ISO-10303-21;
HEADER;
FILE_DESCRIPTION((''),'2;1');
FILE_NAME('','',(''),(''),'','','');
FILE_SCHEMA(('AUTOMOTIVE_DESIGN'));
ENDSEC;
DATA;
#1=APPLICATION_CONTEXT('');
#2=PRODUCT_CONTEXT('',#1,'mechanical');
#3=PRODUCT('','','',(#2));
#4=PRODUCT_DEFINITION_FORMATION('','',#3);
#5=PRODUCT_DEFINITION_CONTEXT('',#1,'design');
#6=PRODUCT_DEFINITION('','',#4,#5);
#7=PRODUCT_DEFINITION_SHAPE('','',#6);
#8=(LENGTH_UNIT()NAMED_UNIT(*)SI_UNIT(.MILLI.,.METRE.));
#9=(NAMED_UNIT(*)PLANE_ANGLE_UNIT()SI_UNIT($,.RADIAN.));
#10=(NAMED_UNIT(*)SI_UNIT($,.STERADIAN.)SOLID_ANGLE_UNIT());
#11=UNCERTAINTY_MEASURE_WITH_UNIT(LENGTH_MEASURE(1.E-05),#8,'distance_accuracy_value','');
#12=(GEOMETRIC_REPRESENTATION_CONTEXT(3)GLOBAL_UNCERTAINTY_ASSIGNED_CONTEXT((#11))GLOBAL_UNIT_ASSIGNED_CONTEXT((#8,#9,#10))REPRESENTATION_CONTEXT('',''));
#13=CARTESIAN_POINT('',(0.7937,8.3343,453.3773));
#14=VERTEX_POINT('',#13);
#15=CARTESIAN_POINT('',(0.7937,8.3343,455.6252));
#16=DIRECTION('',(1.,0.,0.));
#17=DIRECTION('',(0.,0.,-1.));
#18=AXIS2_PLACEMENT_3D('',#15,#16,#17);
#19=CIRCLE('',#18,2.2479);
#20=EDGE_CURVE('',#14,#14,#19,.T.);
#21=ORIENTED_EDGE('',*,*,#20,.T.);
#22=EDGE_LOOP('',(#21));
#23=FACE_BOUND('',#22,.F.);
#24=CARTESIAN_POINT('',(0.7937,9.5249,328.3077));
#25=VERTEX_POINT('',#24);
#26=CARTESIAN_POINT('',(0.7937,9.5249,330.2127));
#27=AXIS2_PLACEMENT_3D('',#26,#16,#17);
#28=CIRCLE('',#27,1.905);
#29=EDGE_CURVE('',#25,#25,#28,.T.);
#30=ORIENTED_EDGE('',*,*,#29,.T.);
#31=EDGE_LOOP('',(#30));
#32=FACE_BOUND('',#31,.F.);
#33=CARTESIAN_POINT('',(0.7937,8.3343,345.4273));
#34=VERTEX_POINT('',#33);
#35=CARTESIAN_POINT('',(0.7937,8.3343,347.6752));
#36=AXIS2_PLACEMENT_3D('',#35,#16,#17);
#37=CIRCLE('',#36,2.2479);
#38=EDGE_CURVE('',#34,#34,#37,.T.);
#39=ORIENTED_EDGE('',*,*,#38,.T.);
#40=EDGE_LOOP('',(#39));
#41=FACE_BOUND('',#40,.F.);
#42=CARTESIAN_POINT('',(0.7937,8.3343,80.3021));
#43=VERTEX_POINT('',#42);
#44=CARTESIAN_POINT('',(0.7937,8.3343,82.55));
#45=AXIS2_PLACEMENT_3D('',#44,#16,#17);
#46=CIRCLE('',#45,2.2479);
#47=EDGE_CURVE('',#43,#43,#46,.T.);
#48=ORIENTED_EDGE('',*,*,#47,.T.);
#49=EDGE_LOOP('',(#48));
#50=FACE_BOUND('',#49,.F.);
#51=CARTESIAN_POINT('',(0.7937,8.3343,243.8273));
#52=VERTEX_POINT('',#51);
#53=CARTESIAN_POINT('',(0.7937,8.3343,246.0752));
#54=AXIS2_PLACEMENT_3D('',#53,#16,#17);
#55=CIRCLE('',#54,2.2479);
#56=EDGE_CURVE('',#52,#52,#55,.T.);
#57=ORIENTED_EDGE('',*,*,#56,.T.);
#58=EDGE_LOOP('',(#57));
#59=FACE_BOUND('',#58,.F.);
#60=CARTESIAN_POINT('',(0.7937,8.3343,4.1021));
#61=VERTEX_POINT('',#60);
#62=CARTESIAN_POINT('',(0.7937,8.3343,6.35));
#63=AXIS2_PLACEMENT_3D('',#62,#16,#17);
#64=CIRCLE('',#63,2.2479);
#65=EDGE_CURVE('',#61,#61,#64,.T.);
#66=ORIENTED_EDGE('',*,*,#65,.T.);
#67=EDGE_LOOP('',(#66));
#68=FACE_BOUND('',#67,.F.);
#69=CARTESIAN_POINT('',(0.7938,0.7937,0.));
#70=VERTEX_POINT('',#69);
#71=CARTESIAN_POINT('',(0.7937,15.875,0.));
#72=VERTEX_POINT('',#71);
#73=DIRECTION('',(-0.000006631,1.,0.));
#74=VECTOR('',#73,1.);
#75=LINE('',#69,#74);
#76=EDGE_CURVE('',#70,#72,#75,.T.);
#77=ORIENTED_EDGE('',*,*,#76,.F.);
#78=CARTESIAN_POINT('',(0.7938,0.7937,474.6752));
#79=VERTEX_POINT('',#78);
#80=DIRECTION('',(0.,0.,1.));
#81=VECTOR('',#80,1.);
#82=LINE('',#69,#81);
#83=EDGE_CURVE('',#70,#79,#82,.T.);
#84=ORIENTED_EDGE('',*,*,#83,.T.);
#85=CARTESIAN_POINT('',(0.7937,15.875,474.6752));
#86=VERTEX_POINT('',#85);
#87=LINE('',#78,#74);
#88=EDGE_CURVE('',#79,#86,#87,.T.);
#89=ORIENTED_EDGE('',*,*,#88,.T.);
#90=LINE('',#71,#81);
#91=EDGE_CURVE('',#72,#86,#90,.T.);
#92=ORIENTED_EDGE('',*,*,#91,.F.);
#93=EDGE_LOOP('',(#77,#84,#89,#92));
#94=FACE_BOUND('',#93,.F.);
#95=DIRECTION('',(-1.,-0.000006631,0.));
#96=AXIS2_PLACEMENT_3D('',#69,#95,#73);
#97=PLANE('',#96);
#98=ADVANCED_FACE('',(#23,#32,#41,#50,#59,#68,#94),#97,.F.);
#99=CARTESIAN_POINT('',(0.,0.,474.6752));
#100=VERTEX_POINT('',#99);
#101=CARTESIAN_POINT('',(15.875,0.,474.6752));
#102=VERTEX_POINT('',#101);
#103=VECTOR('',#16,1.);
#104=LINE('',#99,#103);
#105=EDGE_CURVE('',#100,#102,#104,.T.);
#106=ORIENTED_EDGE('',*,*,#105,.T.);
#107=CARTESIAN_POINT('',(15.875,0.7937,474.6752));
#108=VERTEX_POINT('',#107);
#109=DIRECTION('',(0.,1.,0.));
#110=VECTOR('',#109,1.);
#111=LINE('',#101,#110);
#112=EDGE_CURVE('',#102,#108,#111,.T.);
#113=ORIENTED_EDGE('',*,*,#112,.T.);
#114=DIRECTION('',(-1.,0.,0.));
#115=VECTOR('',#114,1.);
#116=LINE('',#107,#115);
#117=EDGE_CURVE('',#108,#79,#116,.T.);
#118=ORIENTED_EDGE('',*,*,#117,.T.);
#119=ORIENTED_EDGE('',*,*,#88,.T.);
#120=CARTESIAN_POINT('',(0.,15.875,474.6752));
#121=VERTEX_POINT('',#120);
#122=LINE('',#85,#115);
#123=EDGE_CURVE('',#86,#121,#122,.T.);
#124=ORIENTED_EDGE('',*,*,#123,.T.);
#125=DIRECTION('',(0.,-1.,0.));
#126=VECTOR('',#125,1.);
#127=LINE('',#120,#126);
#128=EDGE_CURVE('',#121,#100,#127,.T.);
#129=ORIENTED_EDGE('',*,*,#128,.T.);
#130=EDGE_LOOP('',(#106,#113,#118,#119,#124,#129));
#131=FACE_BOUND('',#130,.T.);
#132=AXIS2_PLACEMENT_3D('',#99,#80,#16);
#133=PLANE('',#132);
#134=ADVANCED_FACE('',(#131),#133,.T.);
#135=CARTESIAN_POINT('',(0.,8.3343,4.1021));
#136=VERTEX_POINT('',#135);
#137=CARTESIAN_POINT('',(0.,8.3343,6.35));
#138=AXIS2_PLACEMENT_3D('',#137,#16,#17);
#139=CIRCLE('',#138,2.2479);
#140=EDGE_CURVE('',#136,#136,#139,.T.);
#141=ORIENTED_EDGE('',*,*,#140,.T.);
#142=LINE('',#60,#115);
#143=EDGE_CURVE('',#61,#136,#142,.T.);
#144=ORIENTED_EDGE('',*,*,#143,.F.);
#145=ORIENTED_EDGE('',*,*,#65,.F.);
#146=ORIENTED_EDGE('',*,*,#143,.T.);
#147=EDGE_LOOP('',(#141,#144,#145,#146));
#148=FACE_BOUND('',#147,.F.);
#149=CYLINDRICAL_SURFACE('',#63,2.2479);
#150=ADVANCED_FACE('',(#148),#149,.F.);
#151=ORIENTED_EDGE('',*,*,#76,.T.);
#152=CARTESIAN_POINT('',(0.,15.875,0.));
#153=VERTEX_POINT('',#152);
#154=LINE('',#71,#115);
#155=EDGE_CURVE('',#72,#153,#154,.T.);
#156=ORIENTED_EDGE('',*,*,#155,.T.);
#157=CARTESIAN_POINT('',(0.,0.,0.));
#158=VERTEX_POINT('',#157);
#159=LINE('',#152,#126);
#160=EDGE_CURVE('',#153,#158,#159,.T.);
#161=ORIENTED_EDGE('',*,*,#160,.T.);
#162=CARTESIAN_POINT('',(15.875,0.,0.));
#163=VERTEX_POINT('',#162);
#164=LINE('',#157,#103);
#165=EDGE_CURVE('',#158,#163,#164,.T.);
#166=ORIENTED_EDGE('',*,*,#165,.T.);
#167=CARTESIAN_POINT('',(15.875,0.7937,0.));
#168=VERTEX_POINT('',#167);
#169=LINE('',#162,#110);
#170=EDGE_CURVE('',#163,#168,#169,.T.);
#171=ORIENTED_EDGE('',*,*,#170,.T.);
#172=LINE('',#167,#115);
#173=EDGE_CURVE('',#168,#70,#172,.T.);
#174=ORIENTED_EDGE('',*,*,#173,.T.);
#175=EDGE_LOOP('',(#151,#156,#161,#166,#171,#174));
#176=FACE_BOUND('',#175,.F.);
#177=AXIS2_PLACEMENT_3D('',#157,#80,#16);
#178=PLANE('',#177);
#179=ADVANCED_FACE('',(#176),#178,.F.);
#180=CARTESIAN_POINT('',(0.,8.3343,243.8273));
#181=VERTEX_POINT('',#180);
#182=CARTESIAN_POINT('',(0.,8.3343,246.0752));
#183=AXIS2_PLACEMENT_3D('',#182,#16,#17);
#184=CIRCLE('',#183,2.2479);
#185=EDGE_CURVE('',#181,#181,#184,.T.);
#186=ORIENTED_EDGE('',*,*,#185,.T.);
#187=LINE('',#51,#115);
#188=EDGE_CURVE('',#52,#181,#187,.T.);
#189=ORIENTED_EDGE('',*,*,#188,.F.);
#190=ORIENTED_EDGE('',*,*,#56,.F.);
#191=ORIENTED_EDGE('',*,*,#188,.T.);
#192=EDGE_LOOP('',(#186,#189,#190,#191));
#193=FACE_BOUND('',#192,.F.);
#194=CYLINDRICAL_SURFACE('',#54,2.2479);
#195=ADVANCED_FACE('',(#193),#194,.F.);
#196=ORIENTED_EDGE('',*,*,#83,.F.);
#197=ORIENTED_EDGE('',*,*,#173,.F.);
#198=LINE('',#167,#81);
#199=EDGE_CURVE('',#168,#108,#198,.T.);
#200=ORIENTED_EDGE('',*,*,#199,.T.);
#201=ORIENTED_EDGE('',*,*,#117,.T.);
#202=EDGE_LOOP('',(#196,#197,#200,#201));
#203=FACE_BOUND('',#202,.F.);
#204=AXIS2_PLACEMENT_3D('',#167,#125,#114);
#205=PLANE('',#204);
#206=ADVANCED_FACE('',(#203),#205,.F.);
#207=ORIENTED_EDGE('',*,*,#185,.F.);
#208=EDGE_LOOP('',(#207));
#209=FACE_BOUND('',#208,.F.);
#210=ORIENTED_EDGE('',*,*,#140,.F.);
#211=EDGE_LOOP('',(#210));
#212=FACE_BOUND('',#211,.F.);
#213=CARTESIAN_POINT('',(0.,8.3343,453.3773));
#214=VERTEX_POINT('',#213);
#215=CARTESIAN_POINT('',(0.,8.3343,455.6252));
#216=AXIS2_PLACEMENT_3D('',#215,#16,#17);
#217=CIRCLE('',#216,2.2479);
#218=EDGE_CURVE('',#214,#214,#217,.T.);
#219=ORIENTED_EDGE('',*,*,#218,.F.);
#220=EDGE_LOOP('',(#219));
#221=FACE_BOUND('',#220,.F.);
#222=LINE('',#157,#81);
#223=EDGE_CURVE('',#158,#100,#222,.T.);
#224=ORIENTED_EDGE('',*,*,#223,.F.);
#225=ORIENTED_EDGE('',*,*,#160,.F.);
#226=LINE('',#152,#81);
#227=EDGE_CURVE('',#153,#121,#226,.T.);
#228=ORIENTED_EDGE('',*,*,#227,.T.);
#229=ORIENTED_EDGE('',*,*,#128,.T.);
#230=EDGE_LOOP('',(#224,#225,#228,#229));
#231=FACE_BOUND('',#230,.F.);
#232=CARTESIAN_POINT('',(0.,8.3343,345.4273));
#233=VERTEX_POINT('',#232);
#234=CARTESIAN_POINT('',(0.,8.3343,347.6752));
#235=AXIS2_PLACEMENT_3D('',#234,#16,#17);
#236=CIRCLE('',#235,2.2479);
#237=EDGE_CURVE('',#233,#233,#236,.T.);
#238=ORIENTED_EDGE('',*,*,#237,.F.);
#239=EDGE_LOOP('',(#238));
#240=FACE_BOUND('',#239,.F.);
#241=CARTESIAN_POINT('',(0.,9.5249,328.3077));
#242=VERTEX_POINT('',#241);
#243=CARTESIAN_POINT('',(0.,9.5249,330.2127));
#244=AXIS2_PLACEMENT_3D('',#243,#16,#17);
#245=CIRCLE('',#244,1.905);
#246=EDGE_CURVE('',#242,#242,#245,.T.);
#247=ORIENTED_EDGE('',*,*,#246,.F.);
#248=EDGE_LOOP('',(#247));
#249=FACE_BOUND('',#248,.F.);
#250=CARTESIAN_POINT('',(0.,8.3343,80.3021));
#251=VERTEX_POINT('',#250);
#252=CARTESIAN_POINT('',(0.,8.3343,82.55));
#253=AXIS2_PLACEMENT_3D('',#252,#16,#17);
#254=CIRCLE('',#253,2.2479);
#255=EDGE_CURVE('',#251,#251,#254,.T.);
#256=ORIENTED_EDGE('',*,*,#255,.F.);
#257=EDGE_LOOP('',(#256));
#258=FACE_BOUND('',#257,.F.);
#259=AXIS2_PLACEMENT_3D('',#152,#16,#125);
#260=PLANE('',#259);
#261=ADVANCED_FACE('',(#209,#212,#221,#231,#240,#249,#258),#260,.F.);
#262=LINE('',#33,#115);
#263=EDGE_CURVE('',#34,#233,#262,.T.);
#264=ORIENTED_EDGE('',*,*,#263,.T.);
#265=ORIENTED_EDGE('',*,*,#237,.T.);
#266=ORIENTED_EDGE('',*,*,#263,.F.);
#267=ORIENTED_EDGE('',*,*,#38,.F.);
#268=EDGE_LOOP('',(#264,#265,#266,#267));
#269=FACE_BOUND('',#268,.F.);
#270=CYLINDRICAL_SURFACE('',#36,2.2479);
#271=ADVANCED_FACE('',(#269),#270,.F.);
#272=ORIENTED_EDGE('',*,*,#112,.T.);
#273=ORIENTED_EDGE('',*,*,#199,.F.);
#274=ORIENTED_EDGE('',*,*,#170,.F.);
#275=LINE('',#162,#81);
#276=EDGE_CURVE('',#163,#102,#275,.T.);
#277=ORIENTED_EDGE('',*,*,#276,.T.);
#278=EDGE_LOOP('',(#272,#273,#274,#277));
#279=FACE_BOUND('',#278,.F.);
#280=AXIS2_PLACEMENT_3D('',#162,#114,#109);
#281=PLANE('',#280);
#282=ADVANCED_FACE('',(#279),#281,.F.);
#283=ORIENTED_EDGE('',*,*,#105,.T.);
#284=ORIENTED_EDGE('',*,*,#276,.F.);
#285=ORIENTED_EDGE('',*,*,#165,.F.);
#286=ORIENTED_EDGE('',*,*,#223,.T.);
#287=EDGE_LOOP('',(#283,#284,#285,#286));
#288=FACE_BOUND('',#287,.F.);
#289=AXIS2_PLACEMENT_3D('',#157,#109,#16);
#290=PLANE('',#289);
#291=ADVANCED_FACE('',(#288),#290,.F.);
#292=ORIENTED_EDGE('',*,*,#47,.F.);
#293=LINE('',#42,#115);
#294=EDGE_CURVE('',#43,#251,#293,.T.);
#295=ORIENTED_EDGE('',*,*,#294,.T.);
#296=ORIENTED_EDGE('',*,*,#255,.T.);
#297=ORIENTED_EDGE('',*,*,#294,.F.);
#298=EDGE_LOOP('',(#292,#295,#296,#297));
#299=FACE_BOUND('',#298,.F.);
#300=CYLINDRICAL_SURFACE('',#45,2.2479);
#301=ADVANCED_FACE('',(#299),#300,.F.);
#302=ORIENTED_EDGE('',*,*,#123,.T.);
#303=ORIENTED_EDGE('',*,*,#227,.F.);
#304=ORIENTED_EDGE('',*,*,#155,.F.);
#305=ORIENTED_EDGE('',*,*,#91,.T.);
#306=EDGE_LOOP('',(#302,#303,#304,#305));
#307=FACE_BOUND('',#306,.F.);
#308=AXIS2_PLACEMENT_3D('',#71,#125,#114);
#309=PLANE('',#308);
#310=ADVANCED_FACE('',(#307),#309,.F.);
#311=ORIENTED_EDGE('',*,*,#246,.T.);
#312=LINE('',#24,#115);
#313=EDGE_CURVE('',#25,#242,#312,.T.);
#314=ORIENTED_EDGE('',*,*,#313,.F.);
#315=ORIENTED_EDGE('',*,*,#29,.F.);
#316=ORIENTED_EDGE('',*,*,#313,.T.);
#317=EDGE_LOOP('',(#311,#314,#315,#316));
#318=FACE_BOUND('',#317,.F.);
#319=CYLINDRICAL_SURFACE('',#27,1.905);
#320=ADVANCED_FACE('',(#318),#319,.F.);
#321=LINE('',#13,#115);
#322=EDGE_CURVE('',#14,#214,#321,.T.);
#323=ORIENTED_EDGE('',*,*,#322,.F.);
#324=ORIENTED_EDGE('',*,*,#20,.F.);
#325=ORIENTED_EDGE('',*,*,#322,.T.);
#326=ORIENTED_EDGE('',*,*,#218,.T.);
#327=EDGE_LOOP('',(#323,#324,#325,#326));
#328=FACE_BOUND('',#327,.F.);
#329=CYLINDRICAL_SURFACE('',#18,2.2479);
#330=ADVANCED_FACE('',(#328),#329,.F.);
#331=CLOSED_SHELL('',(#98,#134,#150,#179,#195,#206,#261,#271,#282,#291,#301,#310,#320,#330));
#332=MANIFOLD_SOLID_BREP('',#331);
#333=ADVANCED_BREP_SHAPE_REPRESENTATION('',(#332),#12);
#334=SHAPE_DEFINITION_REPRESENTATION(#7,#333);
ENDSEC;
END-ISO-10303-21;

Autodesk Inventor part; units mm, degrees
ref_plane "YZ Plane" through (0, 0, 0) normal (1, 0, 0) x (0, 1, 0)
ref_plane "XZ Plane" through (0, 0, 0) normal (0, 1, 0) x (-1, 0, 0)
ref_plane "XY Plane" through (0, 0, 0) normal (0, 0, 1) x (1, 0, 0)
sketch "Sketch1" plane through (0, 0, 0) normal (0, 0, 1) x (1, 0, 0)
  line L0 (0, 0) -> (15.875, 0)
  line L1 (15.875, 0) -> (15.875, 0.7937)
  line L2 (15.875, 0.7937) -> (0.7938, 0.7937)
  line L3 (0.7938, 0.7937) -> (0.7937, 15.875)
  line L4 (0.7937, 15.875) -> (0, 15.875)
  line L5 (0, 15.875) -> (0, 0)
  dimension "d0" = 15.875
  dimension "d1" = 0.7937
  dimension "d2" = 0.7937
extrude "Extrusion1" add sketch "Sketch1" along normal blind 474.6752
sketch "Sketch2" plane through (0.7937, 0.7937, 0) normal (1, 0, 0) x (0, 0, -1)
  line L0 (0, 0) -> (0, 15.0812) projected
  line L1 (-474.6752, 0) -> (-474.6752, 15.0812) projected
  line L2 (-474.6752, 7.5406) -> (0, 7.5406) construction
  circle A0 centre (-455.6252, 112.4267) radius 2.2479 construction
  circle A1 centre (-82.55, 112.4267) radius 2.2479 construction
  circle A2 centre (-63.5127, 112.4267) radius 2.2479 construction
  circle A3 centre (-19.0627, 112.4267) radius 2.2479 construction
  circle A4 centre (-6.35, 112.4267) radius 2.2479 construction
  circle A5 centre (-246.0752, 112.4267) radius 2.2479 construction
  circle A6 centre (-347.6752, 112.4267) radius 2.2479 construction
  line L3 (0, 104.8861) -> (0, 119.9674) construction
  line L4 (0, 119.9674) -> (-474.6752, 119.9674) construction
  line L5 (-474.6752, 104.8861) -> (-474.6752, 119.9674) construction
  line L6 (0, 104.8861) -> (-474.6752, 104.8861) construction
  circle A7 centre (-455.6252, 7.5406) radius 2.2479
  circle A8 centre (-347.6752, 7.5406) radius 2.2479
  circle A9 centre (-246.0752, 7.5406) radius 2.2479
  circle A10 centre (-82.55, 7.5406) radius 2.2479
  circle A11 centre (-6.35, 7.5406) radius 2.2479
  line L7 (-455.6252, 112.4267) -> (-455.6252, 7.5406) construction
  line L8 (-347.6752, 7.5406) -> (-347.6752, 112.4267) construction
  line L9 (-246.0752, 112.4267) -> (-246.0752, 7.5406) construction
  line L10 (-82.55, 112.4267) -> (-82.55, 7.5406) construction
  line L11 (-6.35, 7.5406) -> (-6.35, 112.4267) construction
  circle A12 centre (-330.2127, 8.7312) radius 1.905 projected
  circle A13 centre (-369.6843, 112.9728) radius 1.905 projected
  point P0 (0, -0.7937)
extrude "Extrusion2" cut sketch "Sketch2" against normal through all contours A7 | A8 | A9 | A10 | A11 | A12
properties part number "Electrical Board 1 Bracing L Channel Part 2" material "Aluminum 6061"
